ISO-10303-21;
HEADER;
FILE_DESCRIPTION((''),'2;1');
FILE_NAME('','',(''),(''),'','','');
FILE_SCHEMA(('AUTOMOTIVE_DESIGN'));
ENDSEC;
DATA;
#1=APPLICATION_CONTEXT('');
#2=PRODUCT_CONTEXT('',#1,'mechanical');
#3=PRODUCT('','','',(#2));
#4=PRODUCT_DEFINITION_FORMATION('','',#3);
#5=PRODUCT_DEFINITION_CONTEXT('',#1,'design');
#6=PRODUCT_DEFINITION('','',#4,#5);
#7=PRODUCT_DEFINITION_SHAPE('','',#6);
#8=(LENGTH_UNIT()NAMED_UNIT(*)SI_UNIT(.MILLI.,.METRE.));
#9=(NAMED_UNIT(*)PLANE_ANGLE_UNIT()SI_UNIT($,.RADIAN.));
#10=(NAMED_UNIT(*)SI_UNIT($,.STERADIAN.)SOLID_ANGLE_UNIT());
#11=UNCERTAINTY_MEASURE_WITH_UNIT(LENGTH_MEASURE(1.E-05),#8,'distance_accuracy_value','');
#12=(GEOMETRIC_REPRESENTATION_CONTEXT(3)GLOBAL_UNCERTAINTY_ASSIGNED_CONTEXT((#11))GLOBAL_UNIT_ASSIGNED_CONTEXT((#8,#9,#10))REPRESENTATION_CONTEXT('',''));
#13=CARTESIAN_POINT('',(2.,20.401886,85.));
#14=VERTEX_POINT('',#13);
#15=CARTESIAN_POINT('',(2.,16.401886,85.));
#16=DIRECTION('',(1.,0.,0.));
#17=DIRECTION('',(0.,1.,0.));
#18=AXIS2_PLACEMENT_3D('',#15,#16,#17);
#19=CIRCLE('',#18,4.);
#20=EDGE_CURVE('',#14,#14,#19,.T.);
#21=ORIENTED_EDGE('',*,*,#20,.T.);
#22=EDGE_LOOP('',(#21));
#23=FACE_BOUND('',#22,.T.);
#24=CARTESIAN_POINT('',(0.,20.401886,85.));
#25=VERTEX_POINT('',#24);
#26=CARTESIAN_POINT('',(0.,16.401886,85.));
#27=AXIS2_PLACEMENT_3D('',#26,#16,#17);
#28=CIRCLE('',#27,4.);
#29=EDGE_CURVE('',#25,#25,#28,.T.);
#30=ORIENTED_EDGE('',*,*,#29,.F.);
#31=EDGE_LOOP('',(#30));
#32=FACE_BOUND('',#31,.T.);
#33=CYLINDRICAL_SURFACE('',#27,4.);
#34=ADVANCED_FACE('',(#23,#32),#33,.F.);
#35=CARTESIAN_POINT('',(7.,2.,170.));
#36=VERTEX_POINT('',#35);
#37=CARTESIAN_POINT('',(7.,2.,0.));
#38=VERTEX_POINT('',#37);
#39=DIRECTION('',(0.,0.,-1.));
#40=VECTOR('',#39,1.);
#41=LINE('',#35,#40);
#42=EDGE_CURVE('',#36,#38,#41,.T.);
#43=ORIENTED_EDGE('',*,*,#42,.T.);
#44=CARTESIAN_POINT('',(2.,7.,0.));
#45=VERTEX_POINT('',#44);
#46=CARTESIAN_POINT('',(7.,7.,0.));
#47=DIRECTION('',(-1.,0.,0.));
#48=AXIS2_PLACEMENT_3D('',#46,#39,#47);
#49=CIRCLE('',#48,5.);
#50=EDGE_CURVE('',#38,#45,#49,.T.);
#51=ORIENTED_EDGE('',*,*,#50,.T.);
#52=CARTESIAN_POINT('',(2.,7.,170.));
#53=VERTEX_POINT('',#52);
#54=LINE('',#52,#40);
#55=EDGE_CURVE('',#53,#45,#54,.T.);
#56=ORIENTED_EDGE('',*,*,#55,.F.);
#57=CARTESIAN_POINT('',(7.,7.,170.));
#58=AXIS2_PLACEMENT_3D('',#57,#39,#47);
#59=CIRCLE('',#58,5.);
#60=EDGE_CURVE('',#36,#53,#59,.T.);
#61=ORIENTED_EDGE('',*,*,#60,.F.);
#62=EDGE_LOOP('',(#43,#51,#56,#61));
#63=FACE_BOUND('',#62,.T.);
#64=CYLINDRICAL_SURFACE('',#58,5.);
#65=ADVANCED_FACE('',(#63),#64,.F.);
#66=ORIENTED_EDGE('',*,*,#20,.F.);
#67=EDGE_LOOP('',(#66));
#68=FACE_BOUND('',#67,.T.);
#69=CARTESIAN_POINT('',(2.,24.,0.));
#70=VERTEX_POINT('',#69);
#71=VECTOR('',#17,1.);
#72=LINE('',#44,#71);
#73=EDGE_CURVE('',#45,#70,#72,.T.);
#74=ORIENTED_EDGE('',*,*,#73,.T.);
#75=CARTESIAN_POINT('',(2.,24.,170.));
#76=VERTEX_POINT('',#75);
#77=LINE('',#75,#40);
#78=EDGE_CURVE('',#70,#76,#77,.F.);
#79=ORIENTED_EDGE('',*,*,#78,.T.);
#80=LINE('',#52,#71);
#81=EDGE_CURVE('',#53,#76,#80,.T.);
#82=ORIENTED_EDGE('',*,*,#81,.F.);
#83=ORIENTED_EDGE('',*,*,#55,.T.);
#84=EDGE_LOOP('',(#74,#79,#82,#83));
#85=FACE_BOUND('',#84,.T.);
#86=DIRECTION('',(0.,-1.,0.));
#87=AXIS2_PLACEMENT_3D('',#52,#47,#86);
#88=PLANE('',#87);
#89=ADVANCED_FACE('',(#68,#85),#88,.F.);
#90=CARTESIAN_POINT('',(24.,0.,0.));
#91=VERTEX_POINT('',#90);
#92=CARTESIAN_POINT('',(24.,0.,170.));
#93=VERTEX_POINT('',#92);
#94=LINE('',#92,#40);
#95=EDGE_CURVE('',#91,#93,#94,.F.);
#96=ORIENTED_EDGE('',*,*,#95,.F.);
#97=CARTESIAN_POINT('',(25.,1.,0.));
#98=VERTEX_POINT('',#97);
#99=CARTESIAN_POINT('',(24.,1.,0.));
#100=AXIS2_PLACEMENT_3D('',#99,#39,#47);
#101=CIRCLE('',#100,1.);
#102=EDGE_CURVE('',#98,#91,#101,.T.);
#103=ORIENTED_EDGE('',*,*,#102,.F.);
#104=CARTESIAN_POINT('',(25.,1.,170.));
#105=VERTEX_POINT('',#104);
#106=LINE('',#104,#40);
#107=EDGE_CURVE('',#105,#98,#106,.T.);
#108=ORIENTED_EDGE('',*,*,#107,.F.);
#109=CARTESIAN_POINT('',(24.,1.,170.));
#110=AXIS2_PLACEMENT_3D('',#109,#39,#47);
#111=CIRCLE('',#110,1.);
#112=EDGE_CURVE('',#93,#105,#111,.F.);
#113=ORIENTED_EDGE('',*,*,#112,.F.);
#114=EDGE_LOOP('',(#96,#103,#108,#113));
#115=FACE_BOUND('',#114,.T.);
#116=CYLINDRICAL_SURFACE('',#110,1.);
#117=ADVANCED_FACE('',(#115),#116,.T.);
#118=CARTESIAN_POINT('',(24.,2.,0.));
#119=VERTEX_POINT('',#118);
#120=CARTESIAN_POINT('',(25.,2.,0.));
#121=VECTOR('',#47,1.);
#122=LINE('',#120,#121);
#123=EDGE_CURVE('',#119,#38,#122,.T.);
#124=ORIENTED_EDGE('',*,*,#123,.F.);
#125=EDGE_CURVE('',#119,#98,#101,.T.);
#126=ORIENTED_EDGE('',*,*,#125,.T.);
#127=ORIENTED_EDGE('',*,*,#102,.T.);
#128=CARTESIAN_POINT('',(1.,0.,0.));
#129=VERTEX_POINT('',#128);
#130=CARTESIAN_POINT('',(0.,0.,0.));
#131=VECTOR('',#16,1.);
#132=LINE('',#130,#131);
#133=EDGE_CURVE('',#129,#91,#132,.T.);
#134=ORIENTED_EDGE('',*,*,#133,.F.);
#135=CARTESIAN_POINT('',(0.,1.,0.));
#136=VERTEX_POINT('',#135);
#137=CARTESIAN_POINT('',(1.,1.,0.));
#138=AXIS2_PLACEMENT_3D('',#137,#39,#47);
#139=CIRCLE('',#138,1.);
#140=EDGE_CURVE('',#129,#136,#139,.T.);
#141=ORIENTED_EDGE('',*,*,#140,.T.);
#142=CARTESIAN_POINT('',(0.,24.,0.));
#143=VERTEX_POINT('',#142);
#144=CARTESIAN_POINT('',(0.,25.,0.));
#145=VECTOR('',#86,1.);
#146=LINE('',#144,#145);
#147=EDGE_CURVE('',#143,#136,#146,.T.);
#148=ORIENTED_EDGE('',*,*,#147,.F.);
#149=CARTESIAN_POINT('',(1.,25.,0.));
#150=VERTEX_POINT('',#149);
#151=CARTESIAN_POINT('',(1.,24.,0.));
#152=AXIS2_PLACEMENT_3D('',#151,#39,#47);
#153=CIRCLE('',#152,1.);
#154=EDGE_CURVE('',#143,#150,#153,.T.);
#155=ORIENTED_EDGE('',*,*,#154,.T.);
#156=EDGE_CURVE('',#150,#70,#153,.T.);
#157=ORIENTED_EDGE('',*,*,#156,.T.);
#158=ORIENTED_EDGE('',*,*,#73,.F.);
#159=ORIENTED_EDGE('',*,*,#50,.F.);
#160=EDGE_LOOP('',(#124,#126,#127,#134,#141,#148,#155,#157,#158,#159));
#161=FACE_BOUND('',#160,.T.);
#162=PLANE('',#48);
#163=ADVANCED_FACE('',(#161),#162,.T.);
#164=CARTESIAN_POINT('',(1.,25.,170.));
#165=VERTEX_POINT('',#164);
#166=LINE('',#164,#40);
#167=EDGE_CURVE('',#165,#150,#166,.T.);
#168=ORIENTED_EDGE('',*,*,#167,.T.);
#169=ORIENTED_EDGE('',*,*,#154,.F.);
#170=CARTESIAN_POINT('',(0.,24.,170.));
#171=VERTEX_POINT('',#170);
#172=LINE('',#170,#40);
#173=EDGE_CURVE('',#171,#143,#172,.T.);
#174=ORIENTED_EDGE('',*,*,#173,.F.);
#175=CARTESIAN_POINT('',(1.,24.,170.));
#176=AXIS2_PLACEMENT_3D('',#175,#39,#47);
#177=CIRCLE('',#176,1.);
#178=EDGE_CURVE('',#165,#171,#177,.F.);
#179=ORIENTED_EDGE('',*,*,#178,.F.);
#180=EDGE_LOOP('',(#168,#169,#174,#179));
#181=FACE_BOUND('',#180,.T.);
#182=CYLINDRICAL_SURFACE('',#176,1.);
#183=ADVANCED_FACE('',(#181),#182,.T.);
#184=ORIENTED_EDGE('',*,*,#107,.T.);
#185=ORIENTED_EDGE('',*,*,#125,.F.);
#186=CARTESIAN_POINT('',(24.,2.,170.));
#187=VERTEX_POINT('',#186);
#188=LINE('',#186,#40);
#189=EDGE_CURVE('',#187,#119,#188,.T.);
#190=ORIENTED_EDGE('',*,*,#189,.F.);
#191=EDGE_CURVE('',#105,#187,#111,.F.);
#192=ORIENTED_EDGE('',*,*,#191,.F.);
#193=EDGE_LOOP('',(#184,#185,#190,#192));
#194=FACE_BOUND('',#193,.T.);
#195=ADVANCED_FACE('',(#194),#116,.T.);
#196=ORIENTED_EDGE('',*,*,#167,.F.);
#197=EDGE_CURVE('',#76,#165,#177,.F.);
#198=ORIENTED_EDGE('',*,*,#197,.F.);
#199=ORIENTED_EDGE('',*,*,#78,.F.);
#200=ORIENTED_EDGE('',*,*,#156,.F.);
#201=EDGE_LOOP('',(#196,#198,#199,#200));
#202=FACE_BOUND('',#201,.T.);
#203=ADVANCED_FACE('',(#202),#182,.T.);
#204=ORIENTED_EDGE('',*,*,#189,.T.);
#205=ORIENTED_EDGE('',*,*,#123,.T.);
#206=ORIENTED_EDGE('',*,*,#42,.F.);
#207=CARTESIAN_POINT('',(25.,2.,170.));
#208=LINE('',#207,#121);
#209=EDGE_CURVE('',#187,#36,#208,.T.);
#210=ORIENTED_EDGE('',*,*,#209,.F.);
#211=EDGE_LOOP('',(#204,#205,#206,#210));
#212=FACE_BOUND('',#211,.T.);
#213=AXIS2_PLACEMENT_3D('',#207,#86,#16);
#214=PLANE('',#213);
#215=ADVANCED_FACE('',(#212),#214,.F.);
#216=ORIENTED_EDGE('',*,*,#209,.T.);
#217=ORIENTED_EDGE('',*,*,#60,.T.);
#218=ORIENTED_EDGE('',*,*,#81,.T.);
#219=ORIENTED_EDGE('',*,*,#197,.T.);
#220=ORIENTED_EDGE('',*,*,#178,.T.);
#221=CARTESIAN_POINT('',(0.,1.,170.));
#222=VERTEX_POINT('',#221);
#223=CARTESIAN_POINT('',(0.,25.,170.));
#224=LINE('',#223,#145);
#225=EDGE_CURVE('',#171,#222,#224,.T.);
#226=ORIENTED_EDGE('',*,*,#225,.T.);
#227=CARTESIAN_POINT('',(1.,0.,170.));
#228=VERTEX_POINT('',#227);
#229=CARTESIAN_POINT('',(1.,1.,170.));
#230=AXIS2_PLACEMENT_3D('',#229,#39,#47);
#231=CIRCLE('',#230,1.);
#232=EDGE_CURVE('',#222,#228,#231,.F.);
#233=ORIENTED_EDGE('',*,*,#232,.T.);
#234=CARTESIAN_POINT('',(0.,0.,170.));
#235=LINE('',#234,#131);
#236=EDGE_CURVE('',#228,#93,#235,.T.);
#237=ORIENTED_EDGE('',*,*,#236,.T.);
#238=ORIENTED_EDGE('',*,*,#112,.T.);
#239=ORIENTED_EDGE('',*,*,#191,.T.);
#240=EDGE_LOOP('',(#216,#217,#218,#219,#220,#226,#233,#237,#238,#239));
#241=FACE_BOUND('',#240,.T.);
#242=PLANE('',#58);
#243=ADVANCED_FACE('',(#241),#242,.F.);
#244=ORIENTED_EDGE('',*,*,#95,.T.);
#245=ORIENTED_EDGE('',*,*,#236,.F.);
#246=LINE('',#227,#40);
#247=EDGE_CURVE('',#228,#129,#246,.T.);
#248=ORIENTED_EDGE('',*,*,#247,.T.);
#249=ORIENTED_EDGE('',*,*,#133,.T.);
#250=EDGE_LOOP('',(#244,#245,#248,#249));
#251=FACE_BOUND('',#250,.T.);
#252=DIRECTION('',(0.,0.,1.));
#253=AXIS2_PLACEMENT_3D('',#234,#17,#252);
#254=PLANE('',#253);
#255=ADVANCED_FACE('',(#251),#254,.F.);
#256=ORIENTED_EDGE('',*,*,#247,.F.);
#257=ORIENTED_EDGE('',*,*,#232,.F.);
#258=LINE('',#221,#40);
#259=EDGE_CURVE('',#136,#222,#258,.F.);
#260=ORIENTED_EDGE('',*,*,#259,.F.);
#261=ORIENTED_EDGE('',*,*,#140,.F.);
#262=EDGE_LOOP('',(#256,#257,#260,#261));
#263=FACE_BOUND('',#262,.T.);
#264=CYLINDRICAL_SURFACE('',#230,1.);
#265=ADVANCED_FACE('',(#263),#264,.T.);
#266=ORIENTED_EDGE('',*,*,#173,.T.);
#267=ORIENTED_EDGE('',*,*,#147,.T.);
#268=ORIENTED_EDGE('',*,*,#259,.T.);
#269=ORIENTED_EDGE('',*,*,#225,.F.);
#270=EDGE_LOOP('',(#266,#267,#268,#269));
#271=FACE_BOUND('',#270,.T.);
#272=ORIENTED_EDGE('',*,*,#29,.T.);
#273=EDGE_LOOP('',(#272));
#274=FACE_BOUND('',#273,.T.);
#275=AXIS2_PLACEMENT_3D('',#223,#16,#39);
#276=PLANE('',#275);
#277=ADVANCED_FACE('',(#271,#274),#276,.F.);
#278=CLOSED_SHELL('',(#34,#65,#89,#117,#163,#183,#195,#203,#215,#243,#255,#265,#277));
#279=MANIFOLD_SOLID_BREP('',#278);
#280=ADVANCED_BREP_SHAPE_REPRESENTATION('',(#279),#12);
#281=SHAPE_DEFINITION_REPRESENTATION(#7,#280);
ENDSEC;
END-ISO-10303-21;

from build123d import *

# Parameters (mm, degrees)
EXTRUDE_1_DEPTH     = 170
FILLET_1_R          = 1
SKETCH_2_R          = 4
CUT_EXTRUDE_1_DEPTH = 174.360895245


with BuildPart() as part:
    # 草图1 → 凸台-拉伸1 (new body)
    with BuildSketch(Plane.XY):
        with BuildLine():
            Line((0, 0), (25, 0))
            Line((25, 0), (25, 2))
            Line((25, 2), (7, 2))
            ThreePointArc((7, 2), (3.464466094, 3.464466094), (2, 7))
            Line((2, 7), (2, 25))
            Line((2, 25), (0, 25))
            Line((0, 25), (0, 0))
        make_face()
    extrude(amount=EXTRUDE_1_DEPTH)

    # 圆角1
    fillet_1_edges = [part.edges().sort_by_distance(p)[0] for p in [
        (0, 25, 85),
        (25, 2, 85),
        (25, 0, 85),
        (0, 0, 85),
        (2, 25, 85),
    ]]
    fillet(fillet_1_edges, radius=FILLET_1_R - 0.0001)  # a hair under: the kernel refuses the full size

    # 草图2 → 切除-拉伸1 (cut, through all)
    with BuildSketch(Plane(origin=(2, 0, 0), x_dir=(0, 0, -1), z_dir=(1, 0, 0))):
        with Locations(Location((-85, 16.401885755, 0), (0, 0, 90))):
            Circle(SKETCH_2_R)
    extrude(amount=-CUT_EXTRUDE_1_DEPTH, mode=Mode.SUBTRACT)


solid = part.part
